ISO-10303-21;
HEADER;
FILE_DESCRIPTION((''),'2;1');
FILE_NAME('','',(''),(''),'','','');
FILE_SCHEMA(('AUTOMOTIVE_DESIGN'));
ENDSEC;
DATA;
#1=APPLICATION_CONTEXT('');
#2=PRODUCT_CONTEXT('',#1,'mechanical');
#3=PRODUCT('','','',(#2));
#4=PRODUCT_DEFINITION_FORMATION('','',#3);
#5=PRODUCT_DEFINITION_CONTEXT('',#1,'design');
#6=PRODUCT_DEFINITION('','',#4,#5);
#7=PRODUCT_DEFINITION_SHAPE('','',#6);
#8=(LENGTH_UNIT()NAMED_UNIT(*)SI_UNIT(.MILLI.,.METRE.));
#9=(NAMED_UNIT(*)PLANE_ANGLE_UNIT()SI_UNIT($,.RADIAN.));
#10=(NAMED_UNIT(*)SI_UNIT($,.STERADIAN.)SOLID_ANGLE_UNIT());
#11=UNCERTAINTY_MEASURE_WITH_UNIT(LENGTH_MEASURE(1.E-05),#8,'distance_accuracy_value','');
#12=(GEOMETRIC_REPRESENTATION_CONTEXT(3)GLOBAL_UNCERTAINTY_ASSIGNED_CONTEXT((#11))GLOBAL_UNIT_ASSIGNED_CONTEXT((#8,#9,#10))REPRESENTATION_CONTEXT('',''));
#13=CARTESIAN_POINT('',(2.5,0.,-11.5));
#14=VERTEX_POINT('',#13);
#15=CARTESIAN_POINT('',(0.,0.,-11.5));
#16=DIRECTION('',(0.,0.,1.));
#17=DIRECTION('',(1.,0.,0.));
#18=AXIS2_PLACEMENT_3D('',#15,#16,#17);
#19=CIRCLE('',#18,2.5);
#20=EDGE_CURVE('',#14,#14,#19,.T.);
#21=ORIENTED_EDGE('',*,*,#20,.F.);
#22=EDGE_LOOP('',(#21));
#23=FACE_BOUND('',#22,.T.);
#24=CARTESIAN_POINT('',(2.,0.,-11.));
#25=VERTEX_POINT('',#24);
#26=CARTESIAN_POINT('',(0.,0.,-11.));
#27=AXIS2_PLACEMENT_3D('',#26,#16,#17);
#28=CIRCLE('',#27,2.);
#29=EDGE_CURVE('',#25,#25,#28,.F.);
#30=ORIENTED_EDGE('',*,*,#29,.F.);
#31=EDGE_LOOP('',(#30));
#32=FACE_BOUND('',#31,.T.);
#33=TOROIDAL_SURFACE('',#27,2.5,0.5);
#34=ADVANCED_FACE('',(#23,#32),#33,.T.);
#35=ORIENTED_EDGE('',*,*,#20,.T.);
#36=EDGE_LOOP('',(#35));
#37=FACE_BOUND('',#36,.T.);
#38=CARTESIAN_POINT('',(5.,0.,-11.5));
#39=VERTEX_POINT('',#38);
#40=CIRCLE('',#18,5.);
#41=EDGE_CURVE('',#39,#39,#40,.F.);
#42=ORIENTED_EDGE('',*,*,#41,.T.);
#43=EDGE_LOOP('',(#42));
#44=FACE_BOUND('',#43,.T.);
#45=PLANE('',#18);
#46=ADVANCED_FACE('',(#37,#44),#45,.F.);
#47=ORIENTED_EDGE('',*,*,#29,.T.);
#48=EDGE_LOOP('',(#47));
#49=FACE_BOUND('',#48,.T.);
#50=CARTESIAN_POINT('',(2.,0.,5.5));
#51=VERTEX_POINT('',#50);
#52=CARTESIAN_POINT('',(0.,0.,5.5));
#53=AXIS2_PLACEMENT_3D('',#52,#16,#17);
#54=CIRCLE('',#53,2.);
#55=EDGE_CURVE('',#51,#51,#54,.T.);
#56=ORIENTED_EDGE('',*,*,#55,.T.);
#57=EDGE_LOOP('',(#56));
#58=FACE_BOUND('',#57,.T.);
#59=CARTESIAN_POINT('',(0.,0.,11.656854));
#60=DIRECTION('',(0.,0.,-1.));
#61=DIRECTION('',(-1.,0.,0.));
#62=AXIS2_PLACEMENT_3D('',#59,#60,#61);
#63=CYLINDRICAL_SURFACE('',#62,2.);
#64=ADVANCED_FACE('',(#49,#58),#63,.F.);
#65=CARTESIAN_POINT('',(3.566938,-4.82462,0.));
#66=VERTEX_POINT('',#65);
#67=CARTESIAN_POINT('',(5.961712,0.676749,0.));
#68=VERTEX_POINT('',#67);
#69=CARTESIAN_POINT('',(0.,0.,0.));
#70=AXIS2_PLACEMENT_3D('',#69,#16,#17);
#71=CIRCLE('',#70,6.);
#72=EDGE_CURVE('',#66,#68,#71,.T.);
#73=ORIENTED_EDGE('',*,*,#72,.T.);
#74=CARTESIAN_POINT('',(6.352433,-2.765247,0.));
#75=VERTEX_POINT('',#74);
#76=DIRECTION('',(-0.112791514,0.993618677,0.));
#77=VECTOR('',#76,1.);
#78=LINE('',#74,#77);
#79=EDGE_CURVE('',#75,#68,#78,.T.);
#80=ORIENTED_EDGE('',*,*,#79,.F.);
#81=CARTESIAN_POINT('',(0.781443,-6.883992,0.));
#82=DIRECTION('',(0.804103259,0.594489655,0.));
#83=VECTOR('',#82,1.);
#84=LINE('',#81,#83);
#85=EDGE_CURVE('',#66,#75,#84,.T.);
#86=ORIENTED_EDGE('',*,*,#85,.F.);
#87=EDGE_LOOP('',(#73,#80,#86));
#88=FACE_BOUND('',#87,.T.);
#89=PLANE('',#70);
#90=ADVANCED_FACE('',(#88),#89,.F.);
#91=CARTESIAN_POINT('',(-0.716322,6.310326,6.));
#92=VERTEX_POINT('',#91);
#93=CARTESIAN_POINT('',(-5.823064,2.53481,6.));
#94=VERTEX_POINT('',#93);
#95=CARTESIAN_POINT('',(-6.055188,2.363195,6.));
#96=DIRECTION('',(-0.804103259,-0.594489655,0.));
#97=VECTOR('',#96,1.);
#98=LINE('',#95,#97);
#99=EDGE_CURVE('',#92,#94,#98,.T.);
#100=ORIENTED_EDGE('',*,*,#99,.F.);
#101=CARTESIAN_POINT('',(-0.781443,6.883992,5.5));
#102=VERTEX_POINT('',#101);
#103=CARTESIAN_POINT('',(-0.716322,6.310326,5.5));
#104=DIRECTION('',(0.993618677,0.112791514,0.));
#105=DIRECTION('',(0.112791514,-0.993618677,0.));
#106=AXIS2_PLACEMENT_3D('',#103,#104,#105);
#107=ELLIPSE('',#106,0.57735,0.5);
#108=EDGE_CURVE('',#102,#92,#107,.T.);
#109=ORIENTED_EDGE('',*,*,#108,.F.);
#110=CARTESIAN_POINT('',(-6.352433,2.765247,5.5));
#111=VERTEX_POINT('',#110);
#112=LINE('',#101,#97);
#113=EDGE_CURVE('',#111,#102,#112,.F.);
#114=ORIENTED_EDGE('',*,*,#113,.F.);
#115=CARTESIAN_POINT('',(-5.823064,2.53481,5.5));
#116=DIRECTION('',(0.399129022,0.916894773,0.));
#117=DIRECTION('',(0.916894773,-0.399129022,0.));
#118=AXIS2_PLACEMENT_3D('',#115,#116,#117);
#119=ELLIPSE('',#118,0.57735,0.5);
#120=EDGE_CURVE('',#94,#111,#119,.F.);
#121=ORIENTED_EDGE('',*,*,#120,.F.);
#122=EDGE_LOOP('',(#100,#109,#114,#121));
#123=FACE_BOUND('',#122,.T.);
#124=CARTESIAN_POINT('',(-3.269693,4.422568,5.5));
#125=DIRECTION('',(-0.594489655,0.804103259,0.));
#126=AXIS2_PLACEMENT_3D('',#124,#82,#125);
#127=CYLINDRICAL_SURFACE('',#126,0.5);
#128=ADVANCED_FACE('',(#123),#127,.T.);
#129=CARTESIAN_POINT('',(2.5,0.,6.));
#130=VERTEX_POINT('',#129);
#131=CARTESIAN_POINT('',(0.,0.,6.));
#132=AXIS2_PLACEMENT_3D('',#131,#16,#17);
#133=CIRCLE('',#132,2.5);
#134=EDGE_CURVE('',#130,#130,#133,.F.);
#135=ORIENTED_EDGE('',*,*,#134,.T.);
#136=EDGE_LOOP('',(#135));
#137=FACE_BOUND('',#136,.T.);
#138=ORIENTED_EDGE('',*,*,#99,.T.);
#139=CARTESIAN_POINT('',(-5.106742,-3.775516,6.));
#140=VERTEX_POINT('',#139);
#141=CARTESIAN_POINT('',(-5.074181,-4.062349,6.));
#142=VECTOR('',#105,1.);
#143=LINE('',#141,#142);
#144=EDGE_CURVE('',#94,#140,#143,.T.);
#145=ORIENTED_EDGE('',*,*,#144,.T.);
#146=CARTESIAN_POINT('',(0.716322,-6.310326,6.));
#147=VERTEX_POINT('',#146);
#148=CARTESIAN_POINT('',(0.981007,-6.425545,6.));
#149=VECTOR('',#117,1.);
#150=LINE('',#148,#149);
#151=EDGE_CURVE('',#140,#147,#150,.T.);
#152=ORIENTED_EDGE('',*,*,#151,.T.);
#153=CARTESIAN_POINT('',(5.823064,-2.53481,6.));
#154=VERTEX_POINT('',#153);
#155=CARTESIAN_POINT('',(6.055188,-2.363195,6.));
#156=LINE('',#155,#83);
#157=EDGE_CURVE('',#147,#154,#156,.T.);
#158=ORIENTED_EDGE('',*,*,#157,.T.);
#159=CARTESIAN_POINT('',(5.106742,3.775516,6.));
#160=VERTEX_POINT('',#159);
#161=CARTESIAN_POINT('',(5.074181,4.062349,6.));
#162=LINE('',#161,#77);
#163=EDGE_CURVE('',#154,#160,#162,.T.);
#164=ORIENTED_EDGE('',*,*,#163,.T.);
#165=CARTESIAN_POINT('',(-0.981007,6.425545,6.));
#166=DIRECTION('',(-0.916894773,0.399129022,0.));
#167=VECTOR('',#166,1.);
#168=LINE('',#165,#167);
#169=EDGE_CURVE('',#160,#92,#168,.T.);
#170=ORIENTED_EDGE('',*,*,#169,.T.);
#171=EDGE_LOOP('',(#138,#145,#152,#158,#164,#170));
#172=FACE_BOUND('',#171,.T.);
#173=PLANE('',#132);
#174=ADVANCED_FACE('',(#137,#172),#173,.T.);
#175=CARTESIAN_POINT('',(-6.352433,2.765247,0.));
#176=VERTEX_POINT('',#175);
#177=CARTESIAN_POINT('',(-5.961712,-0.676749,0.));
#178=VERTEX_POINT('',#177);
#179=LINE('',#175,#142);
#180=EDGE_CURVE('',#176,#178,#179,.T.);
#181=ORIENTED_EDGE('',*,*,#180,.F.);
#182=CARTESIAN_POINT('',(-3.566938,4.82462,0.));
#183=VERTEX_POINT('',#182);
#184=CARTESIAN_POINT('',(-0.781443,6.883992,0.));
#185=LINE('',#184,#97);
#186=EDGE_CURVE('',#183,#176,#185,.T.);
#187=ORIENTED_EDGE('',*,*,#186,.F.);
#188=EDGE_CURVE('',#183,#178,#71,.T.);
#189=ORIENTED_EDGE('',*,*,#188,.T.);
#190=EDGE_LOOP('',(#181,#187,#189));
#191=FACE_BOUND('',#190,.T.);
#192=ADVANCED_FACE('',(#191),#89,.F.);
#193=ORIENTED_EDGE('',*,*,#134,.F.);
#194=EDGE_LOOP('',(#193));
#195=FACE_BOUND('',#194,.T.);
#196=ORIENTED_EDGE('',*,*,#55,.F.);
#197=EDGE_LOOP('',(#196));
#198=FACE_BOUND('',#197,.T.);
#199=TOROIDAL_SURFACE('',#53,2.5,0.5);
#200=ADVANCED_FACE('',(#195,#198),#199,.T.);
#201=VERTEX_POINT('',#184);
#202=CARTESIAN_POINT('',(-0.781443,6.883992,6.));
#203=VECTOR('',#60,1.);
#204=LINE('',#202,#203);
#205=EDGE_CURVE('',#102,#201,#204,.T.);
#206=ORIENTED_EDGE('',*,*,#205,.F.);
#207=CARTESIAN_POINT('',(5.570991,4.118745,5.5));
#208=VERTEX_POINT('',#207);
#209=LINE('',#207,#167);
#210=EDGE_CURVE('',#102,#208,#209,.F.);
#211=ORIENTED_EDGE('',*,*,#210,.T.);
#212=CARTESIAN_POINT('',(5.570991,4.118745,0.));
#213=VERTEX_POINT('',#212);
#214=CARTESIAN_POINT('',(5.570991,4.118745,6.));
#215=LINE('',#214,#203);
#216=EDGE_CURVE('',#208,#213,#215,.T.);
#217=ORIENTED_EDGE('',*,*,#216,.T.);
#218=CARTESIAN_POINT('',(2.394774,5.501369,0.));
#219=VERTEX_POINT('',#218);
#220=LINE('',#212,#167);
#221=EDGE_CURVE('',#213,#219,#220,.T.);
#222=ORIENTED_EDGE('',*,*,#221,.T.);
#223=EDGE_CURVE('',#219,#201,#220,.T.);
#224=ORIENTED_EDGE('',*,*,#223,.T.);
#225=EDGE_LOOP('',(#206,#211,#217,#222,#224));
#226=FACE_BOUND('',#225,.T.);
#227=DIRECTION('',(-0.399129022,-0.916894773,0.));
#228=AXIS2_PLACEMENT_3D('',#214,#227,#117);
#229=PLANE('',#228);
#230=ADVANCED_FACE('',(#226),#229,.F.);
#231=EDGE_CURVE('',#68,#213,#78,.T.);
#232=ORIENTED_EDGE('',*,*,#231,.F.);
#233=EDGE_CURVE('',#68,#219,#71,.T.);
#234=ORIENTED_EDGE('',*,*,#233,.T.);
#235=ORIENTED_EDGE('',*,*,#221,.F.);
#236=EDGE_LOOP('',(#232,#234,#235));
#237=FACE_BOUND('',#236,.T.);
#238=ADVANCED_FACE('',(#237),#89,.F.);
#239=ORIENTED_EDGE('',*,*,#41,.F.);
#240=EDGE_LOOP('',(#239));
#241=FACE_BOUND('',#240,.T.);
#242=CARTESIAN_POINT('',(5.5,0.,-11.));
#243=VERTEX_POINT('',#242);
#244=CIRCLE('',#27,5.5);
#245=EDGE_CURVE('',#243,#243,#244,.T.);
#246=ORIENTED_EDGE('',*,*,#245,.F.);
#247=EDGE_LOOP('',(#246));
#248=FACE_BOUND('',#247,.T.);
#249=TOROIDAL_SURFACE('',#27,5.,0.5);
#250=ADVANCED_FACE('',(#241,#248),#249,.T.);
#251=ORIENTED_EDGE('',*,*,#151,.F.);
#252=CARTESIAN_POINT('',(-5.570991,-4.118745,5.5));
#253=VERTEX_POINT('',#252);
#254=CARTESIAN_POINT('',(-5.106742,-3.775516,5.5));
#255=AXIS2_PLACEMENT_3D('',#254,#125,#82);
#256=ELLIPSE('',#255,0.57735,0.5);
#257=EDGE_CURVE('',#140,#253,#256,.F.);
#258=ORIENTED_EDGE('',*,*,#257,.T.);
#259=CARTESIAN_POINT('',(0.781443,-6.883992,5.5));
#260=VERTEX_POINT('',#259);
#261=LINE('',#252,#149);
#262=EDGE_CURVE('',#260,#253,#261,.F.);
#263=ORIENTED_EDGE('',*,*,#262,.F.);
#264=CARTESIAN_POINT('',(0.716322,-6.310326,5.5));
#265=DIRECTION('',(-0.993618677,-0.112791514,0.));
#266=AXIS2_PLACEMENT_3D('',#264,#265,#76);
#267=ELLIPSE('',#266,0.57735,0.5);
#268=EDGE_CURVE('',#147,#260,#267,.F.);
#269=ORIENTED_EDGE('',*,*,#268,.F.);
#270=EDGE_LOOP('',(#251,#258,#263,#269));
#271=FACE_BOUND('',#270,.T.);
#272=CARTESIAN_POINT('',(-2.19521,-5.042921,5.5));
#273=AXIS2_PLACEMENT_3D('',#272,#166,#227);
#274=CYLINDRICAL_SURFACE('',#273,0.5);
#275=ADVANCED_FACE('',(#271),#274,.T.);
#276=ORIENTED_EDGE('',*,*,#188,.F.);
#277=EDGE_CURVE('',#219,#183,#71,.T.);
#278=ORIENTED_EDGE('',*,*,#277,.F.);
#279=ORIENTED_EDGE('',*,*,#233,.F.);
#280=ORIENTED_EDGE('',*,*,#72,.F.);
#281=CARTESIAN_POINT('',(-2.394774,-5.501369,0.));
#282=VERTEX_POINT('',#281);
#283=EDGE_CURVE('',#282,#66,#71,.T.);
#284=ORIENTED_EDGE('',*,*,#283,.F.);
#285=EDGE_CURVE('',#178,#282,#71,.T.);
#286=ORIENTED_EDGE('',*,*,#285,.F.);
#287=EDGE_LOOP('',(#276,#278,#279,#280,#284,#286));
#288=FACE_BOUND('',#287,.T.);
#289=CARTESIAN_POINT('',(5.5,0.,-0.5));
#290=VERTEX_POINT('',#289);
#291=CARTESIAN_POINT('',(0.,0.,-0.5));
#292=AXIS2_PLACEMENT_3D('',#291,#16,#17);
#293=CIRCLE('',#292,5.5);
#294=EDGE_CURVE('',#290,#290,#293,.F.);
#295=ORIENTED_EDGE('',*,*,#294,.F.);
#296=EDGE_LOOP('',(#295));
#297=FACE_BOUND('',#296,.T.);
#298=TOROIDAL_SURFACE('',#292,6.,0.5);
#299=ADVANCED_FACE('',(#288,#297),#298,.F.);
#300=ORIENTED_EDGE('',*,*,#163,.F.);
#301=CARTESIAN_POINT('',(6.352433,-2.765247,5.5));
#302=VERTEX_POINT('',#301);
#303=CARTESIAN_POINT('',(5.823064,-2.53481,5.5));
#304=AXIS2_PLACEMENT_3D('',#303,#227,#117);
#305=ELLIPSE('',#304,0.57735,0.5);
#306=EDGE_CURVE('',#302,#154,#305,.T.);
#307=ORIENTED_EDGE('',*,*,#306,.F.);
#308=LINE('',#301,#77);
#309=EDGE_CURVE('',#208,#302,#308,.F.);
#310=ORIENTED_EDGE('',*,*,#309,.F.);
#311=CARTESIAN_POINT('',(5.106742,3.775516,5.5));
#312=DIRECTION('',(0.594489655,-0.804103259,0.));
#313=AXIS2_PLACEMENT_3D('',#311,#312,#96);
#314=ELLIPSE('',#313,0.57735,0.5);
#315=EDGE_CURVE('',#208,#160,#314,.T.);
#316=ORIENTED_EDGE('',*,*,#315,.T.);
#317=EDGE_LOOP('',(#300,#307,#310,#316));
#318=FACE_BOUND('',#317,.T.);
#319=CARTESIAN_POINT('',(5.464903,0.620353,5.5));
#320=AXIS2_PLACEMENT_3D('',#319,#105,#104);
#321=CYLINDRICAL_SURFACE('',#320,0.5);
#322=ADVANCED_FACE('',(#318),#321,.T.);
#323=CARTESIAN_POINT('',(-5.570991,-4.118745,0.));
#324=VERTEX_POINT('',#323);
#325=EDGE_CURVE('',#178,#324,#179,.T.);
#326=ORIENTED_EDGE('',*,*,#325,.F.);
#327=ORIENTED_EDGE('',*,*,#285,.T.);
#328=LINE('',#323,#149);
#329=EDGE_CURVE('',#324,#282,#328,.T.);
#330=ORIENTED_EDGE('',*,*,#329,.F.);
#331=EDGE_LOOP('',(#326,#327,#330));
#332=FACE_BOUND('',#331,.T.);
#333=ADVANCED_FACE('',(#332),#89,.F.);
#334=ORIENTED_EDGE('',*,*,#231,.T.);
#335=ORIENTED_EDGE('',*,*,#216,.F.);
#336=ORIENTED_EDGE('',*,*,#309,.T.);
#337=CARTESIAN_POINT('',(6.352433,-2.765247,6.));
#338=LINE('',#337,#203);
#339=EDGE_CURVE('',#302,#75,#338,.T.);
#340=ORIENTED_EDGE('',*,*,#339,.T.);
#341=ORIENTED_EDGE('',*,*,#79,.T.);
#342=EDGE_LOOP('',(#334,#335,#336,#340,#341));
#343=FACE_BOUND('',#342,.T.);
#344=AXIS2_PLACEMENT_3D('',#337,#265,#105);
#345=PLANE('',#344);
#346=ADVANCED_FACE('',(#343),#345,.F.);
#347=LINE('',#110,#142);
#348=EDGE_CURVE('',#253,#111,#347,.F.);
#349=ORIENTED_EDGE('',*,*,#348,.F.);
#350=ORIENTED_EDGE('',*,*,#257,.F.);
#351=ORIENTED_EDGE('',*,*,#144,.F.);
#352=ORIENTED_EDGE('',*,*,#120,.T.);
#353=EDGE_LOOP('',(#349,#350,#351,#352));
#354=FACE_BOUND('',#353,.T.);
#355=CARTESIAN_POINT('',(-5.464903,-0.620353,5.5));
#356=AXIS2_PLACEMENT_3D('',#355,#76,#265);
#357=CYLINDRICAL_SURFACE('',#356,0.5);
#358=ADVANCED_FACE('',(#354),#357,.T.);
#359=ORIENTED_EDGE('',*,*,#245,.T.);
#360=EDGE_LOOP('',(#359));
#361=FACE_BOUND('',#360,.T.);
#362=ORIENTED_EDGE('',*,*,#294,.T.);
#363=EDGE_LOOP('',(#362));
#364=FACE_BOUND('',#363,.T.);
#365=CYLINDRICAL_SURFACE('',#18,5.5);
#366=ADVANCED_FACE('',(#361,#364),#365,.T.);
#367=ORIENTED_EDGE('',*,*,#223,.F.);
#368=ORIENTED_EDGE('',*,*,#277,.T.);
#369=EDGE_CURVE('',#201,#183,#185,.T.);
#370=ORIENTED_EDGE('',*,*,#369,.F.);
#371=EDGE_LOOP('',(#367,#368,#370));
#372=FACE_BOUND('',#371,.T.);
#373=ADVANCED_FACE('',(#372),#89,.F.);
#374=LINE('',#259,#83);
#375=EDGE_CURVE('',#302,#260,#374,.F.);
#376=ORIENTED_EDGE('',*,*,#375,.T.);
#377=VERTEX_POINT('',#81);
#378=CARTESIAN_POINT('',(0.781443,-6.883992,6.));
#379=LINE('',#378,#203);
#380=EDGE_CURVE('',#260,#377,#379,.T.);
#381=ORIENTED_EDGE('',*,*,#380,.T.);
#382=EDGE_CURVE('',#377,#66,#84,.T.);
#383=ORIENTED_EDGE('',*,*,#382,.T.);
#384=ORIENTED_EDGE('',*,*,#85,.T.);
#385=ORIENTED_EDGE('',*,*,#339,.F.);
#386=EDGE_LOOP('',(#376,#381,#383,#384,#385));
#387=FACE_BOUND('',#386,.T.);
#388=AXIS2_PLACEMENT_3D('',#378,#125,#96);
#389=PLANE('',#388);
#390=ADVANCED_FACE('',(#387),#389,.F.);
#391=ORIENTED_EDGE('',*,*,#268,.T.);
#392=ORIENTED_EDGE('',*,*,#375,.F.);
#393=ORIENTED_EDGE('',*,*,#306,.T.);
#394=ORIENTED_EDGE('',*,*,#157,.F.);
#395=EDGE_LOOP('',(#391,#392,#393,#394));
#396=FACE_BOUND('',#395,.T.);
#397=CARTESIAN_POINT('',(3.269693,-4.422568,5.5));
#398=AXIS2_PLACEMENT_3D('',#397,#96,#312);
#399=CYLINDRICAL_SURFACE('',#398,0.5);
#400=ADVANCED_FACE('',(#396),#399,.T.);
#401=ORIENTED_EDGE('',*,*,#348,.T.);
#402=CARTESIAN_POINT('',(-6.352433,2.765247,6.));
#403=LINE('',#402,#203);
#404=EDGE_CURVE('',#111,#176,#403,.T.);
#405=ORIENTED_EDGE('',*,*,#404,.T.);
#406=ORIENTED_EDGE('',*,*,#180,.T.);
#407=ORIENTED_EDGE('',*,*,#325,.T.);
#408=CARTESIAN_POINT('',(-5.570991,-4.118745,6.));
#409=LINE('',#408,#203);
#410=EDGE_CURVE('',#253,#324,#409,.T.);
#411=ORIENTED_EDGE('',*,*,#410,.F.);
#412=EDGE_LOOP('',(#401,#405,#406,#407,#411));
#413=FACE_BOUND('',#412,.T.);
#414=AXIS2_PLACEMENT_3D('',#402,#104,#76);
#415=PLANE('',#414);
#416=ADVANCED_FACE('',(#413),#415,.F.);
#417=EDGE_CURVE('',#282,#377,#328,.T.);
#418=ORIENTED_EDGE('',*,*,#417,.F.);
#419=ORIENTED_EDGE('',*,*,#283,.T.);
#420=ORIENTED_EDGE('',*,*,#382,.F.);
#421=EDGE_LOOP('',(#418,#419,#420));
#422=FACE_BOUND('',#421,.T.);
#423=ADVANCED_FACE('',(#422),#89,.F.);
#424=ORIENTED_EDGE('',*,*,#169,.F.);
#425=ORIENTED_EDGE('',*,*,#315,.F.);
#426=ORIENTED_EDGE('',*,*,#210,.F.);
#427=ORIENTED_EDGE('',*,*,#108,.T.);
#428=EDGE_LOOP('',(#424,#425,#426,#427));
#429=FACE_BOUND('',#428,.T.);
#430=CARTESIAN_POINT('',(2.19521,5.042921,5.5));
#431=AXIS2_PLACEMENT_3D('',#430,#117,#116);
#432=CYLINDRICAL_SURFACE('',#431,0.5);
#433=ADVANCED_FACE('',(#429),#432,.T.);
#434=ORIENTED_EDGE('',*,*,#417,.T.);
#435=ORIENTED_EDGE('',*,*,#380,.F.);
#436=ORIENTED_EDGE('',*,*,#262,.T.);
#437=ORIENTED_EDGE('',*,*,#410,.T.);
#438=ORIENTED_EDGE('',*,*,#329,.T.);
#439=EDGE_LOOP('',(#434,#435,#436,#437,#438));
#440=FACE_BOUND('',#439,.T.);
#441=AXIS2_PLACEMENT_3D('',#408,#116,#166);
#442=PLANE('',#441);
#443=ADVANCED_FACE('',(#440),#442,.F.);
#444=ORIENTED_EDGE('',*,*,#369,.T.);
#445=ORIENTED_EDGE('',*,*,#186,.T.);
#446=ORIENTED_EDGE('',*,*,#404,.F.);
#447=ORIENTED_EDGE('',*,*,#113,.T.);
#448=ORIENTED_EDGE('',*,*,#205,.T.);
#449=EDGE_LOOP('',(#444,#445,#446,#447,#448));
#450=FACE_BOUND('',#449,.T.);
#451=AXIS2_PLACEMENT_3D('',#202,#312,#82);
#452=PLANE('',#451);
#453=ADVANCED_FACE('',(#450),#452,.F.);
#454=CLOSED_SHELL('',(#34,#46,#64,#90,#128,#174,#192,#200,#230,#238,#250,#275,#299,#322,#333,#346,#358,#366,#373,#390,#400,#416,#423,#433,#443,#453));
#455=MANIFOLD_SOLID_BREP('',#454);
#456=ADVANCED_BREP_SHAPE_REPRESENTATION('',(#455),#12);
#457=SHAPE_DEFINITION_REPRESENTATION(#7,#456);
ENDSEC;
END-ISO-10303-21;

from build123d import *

# Parameters (mm, degrees)
EXTRUDE_1_DEPTH     = 6
SKETCH_2_R          = 5.5
EXTRUDE_2_DEPTH     = 11.5
SKETCH_3_R          = 2
CUT_EXTRUDE_1_DEPTH = 17.5
FILLET_1_R          = 0.5
FILLET_2_R          = 0.5
FILLET_3_R          = 0.5


with BuildPart() as part:
    # 草图1 → 凸台-拉伸1 (new body)
    with BuildSketch(Plane.XY):
        Polygon((-6.352433325, 2.765246979), (-5.570990794, -4.118745146), (0.781442531, -6.883992125), (6.352433325, -2.765246979), (5.570990794, 4.118745146), (-0.781442531, 6.883992125), align=None)
    extrude(amount=EXTRUDE_1_DEPTH)

    # 草图2 → 凸台-拉伸2 (add)
    with BuildSketch(Plane.XY):
        Circle(SKETCH_2_R)
    extrude(amount=-EXTRUDE_2_DEPTH)

    # 草图3 → 切除-拉伸1 (cut)
    with BuildSketch(Plane(origin=(0, 0, -11.5), x_dir=(-1, 0, 0), z_dir=(0, 0, -1))):
        Circle(SKETCH_3_R)
    extrude(amount=-CUT_EXTRUDE_1_DEPTH, mode=Mode.SUBTRACT)

    # 圆角1
    fillet_1_edges = [part.edges().sort_by_distance(p)[0] for p in [
        (-5.5, 0, 0),
    ]]
    fillet(fillet_1_edges, radius=FILLET_1_R - 0.0001)  # a hair under: the kernel refuses the full size

    # 圆角2
    fillet_2_edges = [part.edges().sort_by_distance(p)[0] for p in [
        (-2.394774131, -5.501368635, 6),
        (3.566937928, -4.824619552, 6),
        (5.961712059, 0.676749083, 6),
        (-5.5, 0, -11.5),
        (2.394774131, 5.501368635, 6),
        (-3.566937928, 4.824619552, 6),
        (-5.961712059, -0.676749083, 6),
    ]]
    fillet(fillet_2_edges, radius=FILLET_2_R)

    # 圆角3
    fillet_3_edges = [part.edges().sort_by_distance(p)[0] for p in [
        (2, 0, -11.5),
        (2, 0, 6),
    ]]
    fillet(fillet_3_edges, radius=FILLET_3_R)


solid = part.part
